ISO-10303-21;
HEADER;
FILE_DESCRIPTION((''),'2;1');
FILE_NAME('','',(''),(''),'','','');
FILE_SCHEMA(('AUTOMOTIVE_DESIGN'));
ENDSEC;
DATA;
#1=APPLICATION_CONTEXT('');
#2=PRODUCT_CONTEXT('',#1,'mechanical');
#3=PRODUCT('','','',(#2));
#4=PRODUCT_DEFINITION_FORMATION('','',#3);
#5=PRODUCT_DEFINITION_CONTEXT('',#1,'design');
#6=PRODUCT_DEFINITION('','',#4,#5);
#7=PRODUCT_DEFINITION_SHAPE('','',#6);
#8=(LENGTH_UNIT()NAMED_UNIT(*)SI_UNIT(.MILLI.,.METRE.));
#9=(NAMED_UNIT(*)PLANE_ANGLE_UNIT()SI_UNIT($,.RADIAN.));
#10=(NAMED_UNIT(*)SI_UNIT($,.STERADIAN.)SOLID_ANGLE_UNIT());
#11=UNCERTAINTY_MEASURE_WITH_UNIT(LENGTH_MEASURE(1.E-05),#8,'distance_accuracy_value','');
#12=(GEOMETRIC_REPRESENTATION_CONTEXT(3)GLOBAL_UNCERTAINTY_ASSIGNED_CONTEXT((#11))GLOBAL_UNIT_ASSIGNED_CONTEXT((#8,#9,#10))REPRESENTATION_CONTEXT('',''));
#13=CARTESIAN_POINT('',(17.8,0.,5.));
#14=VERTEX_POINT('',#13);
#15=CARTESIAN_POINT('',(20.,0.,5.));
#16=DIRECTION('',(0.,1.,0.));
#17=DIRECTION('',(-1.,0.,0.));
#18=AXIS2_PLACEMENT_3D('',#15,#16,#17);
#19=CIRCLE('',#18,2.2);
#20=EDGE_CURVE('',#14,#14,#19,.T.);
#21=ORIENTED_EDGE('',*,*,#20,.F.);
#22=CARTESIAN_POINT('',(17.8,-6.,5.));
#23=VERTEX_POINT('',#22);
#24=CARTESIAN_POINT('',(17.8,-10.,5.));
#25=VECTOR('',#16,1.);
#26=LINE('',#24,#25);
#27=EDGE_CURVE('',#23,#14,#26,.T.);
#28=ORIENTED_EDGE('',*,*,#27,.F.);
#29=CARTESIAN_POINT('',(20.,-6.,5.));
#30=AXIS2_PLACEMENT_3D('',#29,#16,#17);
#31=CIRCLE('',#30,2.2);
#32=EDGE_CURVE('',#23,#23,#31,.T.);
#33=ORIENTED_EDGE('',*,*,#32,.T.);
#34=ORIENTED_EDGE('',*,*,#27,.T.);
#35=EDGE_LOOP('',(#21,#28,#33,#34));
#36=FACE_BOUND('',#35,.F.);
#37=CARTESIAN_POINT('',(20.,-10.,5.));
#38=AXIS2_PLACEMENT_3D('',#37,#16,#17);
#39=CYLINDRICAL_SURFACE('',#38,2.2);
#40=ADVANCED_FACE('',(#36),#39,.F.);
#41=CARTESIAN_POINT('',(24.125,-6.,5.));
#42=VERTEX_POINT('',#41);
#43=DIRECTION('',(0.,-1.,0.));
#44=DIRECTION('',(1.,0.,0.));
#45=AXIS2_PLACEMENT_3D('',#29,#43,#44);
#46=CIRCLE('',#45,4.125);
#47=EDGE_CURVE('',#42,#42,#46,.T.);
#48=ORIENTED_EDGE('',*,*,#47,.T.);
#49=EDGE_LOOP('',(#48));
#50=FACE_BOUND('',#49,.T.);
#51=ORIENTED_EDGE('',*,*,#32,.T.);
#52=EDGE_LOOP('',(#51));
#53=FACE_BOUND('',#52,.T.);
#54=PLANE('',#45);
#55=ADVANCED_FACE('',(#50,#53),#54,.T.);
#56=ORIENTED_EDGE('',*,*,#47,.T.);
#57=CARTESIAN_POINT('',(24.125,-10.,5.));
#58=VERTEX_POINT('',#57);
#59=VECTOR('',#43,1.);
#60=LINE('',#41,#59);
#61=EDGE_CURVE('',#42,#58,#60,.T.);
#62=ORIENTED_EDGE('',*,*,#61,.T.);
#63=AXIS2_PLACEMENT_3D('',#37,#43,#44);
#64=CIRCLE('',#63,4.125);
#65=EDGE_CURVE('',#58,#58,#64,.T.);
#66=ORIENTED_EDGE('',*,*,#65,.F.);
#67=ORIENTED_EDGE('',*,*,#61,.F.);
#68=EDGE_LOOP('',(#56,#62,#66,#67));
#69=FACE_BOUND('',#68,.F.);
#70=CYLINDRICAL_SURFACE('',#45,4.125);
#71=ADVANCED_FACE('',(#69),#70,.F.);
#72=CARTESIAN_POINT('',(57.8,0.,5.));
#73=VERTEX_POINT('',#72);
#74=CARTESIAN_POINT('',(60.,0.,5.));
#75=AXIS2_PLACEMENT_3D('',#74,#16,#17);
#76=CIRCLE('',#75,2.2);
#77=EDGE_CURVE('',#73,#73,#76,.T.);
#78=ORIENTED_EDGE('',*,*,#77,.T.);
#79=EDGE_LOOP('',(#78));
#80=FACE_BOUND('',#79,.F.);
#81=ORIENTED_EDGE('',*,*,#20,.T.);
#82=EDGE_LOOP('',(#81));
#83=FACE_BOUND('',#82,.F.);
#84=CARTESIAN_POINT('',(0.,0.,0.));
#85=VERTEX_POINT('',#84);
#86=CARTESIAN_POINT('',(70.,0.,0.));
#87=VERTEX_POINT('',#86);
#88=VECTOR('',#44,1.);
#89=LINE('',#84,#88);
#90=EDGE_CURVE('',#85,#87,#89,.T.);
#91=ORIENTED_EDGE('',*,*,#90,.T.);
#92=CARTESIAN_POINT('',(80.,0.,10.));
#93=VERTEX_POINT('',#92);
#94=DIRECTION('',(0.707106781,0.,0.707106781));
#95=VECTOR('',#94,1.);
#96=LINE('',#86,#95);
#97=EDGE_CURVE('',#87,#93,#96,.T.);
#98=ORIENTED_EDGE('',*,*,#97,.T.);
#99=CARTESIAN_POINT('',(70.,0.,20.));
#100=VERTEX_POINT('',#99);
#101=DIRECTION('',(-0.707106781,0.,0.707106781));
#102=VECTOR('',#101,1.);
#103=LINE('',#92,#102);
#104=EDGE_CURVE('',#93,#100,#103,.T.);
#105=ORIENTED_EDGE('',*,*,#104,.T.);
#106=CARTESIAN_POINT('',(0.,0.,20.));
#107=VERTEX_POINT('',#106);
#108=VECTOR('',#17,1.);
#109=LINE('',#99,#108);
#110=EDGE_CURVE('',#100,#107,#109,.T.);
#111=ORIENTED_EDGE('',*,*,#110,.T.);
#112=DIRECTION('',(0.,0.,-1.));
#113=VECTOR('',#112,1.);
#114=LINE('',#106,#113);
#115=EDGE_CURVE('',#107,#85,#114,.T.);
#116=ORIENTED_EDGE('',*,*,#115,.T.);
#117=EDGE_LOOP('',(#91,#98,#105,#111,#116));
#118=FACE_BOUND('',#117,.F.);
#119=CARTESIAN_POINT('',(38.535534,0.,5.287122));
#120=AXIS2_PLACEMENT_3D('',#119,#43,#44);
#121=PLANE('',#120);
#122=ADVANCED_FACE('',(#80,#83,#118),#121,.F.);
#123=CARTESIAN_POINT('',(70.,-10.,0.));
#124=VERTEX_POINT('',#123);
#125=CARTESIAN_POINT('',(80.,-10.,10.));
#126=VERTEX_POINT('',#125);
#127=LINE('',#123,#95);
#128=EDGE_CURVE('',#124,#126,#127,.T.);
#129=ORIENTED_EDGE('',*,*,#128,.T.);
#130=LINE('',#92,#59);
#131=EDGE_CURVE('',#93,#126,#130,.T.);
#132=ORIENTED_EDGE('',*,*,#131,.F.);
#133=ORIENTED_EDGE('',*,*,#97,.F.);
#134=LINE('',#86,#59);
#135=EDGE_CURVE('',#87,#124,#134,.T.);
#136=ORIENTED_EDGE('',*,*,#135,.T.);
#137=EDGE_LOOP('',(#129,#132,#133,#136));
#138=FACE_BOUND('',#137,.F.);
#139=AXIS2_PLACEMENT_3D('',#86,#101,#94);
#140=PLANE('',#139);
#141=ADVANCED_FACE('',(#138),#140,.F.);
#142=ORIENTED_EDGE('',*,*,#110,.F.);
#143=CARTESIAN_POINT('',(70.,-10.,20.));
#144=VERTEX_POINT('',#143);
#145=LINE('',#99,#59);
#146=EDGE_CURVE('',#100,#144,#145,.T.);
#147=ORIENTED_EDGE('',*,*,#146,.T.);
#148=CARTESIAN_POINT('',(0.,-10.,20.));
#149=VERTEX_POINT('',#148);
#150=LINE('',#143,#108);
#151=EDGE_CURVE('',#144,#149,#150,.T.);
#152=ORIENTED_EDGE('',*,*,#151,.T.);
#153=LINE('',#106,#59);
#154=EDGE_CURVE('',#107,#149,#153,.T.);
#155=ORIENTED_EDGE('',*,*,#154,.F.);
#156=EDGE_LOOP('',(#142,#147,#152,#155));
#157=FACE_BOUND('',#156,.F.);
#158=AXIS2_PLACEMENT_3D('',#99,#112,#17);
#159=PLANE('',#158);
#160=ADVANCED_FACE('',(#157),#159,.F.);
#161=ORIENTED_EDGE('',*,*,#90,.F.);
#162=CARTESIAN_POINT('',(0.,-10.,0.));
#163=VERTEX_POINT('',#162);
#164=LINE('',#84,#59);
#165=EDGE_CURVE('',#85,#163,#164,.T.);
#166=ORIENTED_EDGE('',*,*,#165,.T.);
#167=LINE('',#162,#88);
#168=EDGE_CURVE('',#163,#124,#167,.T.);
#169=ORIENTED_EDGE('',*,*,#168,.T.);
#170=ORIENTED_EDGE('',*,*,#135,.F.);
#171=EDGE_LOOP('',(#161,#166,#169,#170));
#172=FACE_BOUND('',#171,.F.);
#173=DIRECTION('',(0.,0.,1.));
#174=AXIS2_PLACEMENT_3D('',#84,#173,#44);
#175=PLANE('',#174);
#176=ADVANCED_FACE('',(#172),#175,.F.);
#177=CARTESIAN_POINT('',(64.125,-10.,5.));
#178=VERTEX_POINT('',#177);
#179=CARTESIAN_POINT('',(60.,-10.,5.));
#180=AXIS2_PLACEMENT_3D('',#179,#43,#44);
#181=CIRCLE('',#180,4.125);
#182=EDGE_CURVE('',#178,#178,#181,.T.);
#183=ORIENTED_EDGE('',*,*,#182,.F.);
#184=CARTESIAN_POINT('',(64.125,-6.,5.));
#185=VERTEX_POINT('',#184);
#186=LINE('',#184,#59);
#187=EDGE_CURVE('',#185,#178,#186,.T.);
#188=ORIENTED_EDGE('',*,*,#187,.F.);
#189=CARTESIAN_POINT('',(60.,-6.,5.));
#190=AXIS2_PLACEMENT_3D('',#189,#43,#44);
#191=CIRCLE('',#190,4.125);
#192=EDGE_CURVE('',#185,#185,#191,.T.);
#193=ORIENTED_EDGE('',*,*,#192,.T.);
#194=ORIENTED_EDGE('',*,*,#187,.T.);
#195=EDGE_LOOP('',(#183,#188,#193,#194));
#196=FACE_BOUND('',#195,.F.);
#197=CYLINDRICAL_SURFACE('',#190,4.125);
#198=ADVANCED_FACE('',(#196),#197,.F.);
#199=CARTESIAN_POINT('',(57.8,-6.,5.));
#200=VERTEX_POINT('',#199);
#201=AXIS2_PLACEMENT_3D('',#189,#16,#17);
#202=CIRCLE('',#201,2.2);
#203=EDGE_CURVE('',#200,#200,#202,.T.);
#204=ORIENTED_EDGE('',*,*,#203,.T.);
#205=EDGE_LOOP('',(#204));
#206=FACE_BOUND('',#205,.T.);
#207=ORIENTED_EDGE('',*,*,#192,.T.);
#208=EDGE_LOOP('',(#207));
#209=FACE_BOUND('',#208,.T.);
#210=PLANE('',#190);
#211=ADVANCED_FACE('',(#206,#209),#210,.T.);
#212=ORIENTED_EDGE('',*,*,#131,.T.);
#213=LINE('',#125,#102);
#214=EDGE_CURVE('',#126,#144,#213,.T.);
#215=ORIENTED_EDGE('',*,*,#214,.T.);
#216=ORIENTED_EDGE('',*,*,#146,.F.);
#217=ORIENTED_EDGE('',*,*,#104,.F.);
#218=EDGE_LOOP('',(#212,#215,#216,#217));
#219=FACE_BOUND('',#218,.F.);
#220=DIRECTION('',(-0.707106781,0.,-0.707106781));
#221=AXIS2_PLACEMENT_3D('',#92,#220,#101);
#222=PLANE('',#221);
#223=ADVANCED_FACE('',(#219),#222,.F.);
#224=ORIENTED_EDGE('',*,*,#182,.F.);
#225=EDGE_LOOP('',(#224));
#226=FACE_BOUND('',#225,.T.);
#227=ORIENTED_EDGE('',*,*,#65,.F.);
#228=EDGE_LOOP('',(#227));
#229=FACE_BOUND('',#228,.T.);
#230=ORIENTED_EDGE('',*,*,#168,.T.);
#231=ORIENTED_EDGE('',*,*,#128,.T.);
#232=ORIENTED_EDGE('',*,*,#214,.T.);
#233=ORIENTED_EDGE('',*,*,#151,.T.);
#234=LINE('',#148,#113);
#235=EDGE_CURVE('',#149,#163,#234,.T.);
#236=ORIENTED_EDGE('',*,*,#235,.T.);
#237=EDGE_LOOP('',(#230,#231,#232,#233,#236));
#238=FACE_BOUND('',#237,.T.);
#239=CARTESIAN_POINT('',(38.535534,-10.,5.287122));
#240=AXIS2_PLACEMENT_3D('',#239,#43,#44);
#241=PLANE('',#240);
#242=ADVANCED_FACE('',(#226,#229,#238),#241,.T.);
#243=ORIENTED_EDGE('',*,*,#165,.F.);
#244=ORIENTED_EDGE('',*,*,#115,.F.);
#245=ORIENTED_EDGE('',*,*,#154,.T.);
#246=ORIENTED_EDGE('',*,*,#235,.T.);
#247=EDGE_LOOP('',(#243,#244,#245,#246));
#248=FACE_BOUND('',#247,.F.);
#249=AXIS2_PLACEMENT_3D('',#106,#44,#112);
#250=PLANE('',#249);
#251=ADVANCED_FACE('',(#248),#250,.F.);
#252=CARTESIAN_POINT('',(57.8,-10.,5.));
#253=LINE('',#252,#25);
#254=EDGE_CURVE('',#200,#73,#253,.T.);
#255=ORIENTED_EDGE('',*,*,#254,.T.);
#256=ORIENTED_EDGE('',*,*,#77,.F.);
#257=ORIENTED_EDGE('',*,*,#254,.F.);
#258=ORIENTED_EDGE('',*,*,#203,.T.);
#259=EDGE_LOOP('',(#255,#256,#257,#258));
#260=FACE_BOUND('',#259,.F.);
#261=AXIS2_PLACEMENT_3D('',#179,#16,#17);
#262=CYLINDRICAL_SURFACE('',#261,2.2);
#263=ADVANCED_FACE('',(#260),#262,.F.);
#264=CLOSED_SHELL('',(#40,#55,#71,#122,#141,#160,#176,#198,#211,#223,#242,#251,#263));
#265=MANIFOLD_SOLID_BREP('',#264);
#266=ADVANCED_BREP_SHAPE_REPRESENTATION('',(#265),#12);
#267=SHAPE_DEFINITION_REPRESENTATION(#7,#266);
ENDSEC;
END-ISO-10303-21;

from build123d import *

# Parameters (mm, degrees)
F1_DEPTH       = 10
F3_D           = 4.4
F3_CBORE_D     = 8.25
F3_CBORE_DEPTH = 4


# Not quite as in the source:
# - a feature names something its author has since deleted; it is built from what else it names


with BuildPart() as f1:
    # F0 (on Front) → F1 (new body)
    with BuildSketch(Plane.XZ):
        Polygon((0, 10), (0, 0), (70, 0), (80, 10), align=None)
        Polygon((0, 20), (0, 10), (80, 10), (70, 20), align=None)
    extrude(amount=F1_DEPTH)

    # F3 (through all)
    with Locations(Plane.XZ.offset(10)):
        with Locations((20, 5), (60, 5)):
            CounterBoreHole(F3_D / 2, F3_CBORE_D / 2, F3_CBORE_DEPTH)


solid = f1.part
